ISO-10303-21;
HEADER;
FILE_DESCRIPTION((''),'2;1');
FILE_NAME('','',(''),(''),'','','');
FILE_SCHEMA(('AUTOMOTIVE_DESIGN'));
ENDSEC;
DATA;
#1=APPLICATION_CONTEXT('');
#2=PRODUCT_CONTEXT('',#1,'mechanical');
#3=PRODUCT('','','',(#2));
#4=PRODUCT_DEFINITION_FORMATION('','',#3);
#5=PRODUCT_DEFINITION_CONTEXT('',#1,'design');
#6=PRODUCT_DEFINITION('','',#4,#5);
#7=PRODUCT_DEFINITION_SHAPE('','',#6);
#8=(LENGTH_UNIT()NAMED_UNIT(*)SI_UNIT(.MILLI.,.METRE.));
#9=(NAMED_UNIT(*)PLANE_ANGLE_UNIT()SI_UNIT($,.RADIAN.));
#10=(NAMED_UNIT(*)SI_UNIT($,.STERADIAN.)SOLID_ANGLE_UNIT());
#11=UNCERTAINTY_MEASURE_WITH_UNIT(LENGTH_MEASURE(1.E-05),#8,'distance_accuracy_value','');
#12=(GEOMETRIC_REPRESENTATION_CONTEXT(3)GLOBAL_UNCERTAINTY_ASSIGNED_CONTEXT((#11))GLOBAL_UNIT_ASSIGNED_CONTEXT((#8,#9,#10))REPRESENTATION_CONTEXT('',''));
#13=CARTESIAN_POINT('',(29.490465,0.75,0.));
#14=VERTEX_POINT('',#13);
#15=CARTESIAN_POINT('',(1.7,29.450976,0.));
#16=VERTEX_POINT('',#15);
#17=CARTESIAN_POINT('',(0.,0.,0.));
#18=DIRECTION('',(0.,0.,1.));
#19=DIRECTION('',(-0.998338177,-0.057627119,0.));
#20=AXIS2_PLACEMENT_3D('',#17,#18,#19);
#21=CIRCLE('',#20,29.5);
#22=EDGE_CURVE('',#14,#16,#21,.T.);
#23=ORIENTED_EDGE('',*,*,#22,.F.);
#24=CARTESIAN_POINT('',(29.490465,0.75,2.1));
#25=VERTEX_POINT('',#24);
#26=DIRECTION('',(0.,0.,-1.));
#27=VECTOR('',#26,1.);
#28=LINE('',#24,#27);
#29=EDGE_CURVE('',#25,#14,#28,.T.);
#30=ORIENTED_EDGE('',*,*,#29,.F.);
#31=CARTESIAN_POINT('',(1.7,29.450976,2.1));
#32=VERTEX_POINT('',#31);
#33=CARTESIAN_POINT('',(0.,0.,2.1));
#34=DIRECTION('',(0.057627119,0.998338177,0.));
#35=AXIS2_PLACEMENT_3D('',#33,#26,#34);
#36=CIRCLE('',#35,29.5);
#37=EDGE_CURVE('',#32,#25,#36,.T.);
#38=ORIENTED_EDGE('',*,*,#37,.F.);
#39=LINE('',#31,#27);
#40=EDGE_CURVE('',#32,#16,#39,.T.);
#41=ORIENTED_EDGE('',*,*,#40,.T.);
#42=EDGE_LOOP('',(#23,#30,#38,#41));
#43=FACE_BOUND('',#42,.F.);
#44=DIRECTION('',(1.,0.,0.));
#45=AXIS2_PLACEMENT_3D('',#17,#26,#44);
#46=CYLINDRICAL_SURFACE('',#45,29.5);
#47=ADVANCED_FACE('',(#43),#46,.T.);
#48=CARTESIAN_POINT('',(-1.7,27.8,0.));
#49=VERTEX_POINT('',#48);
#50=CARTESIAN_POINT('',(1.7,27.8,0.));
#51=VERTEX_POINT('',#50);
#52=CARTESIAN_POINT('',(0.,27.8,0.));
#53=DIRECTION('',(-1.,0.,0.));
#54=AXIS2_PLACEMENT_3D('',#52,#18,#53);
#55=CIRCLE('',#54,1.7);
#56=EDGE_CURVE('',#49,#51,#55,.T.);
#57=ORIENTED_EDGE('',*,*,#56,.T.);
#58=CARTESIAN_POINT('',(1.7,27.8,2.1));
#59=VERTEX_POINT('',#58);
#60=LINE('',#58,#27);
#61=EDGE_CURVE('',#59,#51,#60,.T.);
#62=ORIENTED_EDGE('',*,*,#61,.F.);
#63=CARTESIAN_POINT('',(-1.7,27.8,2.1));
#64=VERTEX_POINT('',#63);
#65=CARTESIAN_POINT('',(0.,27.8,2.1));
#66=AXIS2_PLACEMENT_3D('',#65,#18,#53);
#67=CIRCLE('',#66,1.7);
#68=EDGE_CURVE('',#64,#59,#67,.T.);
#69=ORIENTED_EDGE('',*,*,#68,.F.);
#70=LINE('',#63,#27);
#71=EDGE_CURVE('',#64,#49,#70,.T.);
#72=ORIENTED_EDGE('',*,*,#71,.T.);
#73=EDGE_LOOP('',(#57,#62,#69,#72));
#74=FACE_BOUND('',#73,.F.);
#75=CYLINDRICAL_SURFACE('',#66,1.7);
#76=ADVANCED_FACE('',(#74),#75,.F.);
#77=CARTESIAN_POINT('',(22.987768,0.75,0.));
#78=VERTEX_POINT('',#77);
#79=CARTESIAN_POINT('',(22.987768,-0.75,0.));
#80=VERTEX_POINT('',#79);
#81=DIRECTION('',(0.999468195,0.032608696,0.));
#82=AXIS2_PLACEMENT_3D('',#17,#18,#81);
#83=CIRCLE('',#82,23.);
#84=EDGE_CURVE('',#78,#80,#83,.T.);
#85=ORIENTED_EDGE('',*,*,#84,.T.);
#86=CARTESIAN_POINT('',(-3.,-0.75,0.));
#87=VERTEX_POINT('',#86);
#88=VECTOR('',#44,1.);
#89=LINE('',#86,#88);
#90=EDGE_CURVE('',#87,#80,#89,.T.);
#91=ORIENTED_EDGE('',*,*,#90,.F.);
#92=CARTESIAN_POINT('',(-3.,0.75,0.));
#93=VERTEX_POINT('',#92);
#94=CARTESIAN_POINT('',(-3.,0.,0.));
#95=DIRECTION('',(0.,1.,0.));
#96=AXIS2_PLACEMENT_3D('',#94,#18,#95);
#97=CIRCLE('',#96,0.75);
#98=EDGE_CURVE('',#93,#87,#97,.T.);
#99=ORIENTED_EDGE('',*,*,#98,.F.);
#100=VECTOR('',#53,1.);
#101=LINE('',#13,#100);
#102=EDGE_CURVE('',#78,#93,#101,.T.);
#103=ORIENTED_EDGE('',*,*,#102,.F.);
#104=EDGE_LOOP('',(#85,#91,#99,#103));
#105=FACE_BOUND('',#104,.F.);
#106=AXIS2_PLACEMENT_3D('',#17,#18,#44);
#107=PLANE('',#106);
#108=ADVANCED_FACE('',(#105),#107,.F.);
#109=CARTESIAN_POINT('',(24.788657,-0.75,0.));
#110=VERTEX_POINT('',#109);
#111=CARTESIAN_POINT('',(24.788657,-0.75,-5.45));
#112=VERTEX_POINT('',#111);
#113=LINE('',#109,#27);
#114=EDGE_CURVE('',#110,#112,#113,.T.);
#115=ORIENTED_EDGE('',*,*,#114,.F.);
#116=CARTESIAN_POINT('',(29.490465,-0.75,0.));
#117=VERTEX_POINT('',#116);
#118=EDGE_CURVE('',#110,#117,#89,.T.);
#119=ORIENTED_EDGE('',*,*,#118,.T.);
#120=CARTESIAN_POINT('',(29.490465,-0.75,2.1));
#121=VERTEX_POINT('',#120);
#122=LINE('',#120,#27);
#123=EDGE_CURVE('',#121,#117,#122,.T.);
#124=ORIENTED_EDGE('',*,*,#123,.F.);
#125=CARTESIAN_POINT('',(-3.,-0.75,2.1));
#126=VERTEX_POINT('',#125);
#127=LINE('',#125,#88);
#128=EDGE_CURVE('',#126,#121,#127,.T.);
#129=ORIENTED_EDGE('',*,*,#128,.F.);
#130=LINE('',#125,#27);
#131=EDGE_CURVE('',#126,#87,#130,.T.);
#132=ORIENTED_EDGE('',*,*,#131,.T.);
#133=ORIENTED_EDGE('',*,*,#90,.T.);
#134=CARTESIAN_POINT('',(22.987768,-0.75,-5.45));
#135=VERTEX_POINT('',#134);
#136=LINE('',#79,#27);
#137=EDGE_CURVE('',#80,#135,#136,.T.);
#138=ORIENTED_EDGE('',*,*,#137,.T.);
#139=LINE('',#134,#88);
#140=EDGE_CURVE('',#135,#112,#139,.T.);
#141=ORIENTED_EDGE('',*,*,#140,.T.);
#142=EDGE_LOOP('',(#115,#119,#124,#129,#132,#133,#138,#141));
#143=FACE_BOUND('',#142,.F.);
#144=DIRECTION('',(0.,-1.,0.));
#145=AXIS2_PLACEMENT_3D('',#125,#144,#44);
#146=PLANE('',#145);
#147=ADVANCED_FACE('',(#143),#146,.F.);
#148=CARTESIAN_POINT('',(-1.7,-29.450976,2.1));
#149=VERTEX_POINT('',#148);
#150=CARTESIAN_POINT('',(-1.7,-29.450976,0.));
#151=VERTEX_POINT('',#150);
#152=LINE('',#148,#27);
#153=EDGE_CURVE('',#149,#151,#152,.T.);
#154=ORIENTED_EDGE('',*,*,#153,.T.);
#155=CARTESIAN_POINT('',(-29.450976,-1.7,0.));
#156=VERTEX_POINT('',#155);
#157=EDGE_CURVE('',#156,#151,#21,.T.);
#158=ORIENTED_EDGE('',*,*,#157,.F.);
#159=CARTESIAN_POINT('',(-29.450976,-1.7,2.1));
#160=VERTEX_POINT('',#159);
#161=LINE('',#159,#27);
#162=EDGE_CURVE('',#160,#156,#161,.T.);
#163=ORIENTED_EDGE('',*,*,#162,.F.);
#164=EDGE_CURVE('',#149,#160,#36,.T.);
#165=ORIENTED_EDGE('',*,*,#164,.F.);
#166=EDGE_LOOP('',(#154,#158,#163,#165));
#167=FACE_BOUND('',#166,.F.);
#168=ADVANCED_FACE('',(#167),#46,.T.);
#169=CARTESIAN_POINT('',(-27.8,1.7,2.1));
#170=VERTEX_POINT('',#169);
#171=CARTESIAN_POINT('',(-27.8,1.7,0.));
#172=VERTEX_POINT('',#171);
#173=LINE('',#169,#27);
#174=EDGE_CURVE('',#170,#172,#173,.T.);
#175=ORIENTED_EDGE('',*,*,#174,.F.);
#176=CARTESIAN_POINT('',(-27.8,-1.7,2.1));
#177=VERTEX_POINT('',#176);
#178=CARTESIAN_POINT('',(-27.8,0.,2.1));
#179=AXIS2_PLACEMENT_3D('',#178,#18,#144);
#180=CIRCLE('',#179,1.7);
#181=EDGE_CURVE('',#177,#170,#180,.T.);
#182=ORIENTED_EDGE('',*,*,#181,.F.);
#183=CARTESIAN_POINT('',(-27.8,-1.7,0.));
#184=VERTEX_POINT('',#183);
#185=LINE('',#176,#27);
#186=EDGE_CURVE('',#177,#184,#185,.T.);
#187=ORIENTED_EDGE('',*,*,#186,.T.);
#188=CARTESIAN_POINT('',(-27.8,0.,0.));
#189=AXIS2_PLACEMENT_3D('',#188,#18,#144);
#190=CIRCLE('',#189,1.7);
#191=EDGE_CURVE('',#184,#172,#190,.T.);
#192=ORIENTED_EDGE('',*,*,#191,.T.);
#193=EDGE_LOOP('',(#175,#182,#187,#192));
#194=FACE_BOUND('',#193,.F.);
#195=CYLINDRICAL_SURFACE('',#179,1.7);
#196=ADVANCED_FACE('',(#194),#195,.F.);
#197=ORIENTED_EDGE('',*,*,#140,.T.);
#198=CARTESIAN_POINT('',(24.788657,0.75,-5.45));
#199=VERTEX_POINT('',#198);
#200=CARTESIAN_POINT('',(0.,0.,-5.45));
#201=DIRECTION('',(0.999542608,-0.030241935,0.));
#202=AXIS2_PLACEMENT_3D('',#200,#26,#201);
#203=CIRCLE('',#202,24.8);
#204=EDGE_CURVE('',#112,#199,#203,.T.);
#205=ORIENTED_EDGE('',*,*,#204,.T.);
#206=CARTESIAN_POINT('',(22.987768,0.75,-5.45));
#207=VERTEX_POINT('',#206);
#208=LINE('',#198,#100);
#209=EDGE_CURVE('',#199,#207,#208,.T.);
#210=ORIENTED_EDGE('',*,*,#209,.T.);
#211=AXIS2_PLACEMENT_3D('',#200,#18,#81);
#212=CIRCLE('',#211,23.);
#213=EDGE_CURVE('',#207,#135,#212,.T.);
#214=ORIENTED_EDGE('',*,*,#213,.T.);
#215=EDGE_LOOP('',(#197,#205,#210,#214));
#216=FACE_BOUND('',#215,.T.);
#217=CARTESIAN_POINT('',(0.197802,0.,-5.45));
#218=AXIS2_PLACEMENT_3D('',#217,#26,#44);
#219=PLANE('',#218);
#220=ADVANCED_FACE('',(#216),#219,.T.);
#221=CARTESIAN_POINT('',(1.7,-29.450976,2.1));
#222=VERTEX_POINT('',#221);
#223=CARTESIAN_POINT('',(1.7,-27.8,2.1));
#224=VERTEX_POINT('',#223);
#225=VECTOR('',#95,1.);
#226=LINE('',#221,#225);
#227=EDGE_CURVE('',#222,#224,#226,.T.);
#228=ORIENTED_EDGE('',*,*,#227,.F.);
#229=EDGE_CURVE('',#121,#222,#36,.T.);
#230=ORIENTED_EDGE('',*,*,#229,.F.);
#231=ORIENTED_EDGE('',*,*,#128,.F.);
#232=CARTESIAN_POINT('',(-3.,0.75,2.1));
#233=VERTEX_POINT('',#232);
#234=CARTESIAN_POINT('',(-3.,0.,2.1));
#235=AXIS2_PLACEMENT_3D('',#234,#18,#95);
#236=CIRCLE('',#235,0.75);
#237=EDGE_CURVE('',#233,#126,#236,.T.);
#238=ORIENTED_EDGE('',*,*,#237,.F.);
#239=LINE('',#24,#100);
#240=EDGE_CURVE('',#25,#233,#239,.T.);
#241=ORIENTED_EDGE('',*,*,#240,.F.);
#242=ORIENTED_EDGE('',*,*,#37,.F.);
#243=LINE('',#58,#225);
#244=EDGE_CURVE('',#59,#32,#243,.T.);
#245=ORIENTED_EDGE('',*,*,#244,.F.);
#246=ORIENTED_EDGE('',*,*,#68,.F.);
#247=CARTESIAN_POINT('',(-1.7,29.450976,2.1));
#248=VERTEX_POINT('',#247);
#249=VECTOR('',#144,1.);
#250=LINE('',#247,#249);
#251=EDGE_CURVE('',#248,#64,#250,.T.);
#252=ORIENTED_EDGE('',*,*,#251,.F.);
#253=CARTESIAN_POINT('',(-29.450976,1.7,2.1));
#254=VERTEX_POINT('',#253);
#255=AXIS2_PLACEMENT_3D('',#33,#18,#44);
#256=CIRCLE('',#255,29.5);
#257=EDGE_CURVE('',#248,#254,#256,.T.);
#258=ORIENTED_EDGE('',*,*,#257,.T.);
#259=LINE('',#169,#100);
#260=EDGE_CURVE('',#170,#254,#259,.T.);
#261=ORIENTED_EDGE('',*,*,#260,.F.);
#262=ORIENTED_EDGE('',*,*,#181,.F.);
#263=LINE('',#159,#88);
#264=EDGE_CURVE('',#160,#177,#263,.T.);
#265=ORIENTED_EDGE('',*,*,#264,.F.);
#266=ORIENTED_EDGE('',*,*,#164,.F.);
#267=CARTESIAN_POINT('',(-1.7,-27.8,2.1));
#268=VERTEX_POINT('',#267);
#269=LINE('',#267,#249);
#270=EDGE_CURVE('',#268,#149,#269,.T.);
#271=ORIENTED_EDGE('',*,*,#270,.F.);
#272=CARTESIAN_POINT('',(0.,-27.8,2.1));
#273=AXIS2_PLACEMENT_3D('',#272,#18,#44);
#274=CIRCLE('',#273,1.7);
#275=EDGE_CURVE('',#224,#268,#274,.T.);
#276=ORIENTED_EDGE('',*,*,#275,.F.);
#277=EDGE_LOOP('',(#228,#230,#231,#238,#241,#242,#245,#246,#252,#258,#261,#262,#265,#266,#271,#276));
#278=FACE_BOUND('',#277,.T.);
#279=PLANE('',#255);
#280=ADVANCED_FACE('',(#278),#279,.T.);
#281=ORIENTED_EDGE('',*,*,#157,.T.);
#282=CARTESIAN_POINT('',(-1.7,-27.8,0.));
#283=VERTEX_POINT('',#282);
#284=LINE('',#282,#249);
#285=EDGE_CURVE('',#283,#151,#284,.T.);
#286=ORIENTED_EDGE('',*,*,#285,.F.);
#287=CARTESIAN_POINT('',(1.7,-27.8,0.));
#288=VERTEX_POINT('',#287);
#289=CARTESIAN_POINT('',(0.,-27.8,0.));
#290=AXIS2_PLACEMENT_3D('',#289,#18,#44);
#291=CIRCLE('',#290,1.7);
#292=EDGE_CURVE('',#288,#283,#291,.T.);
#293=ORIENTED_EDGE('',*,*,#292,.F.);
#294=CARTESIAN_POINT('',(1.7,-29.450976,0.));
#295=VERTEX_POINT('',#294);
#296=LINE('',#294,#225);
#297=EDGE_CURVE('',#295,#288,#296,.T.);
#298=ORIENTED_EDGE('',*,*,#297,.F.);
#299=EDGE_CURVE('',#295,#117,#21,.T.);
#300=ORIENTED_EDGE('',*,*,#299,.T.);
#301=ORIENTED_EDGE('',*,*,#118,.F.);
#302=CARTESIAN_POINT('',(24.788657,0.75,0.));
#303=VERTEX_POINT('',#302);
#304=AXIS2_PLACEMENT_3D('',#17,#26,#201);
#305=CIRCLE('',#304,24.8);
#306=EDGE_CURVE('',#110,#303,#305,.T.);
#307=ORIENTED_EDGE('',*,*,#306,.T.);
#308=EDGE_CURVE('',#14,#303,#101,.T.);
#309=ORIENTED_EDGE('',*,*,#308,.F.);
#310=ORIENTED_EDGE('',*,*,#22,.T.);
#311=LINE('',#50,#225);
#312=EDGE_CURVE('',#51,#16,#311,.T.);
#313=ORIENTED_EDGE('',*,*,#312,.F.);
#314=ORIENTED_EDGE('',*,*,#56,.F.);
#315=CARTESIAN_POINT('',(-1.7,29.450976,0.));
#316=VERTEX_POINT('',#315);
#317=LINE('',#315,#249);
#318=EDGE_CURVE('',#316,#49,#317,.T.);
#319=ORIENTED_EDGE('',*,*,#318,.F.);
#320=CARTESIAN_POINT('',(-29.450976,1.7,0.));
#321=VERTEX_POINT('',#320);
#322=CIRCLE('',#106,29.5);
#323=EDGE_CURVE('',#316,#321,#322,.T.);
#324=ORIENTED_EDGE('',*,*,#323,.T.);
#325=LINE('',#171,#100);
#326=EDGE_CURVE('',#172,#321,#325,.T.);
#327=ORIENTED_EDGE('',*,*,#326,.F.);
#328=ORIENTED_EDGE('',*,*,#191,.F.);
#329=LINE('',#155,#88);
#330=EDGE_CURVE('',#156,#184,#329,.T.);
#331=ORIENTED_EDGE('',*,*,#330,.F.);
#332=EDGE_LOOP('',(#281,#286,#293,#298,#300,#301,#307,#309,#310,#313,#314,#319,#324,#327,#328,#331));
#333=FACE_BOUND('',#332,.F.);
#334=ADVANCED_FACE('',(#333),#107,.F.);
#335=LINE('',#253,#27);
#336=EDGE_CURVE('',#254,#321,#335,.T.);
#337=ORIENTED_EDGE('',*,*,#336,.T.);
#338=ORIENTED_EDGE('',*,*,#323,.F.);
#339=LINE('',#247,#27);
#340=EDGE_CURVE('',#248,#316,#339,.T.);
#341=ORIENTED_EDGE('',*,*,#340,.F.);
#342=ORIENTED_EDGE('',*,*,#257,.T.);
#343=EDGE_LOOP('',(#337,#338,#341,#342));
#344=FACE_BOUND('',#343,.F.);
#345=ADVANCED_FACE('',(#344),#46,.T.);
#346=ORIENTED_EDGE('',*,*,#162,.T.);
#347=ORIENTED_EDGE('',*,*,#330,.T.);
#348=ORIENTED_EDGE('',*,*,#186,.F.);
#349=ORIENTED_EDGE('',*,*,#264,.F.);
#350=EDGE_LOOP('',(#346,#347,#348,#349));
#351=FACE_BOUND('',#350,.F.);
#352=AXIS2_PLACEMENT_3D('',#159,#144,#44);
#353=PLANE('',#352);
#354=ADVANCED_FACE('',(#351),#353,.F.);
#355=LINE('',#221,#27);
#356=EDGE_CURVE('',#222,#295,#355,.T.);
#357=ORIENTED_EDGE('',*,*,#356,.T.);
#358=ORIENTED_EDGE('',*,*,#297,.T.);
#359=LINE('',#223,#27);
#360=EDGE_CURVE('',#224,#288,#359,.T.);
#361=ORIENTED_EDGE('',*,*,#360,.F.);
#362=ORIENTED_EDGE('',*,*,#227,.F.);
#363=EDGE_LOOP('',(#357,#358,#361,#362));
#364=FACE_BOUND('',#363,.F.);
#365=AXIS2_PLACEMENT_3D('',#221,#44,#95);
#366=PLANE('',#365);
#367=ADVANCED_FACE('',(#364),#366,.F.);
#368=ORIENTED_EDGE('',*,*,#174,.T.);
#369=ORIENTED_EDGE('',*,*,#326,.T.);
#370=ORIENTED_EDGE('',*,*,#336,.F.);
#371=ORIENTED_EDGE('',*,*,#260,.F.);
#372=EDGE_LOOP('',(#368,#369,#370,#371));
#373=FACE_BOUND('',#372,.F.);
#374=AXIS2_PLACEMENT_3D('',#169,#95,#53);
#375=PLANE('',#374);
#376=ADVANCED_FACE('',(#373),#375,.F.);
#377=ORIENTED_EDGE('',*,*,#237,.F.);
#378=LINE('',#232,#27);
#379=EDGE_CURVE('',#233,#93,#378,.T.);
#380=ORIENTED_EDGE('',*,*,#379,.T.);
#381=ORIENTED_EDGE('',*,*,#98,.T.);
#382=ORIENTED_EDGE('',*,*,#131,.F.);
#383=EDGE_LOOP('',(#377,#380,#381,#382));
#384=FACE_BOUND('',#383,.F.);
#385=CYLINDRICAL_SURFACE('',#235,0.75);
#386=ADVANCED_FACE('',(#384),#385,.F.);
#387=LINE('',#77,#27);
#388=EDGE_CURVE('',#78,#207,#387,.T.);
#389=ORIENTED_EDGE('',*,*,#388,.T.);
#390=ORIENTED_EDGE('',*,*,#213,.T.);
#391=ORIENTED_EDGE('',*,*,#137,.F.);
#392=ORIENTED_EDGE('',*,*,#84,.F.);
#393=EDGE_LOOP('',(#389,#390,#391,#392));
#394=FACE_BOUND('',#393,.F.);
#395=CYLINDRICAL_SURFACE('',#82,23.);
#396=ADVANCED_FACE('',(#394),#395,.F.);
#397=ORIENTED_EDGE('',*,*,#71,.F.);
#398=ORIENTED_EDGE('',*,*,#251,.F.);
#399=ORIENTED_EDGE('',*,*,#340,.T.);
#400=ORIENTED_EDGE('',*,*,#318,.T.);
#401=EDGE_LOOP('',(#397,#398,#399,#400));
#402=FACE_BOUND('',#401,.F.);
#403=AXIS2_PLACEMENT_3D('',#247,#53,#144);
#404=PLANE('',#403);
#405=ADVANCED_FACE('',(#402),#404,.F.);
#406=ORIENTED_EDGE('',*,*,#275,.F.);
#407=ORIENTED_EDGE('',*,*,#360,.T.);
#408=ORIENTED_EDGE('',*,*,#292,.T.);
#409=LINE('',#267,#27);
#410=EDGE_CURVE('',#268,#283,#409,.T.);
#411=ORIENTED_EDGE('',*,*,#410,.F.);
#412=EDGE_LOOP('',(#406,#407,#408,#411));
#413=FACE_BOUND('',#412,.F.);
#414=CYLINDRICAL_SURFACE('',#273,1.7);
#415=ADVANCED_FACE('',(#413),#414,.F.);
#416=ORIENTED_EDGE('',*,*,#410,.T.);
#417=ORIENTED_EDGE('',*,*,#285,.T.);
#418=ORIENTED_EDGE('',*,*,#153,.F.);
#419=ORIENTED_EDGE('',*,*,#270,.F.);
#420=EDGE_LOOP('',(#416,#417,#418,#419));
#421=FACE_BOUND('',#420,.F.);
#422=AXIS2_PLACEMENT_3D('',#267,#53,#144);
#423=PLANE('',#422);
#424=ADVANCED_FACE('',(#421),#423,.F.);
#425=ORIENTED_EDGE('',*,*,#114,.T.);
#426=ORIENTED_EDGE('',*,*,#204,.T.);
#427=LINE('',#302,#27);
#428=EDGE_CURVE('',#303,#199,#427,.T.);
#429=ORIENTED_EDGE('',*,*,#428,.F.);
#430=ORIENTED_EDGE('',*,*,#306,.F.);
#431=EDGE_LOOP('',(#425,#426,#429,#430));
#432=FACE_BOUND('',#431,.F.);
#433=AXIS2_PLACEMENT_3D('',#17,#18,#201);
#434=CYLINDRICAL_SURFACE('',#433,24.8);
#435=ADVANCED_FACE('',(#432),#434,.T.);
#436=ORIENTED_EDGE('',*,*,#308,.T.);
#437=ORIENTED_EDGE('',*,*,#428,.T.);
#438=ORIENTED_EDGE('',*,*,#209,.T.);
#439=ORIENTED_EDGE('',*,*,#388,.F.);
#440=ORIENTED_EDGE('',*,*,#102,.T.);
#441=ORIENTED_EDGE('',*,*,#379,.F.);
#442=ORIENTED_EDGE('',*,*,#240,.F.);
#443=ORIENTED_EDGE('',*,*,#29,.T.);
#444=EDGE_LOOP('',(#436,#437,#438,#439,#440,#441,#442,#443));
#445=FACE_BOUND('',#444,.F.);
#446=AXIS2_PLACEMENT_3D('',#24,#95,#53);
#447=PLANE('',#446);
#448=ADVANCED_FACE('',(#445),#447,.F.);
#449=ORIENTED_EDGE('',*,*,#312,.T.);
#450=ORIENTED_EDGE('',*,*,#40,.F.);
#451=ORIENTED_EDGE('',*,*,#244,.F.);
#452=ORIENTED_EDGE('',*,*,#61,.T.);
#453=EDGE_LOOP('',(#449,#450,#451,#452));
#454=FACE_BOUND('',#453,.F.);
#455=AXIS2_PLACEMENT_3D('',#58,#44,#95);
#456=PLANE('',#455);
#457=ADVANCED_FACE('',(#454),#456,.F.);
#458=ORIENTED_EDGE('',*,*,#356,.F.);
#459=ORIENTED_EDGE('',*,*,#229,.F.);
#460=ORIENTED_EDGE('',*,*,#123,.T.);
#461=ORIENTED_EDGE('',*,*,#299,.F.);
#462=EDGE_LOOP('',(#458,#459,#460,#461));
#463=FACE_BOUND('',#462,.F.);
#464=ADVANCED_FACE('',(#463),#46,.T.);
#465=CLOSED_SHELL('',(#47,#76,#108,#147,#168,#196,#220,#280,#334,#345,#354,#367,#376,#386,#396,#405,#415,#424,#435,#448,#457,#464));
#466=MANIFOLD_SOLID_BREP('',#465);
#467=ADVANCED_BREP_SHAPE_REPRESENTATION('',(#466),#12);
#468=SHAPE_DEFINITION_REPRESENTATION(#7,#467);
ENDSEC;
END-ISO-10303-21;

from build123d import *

# Parameters (mm, degrees)
F0_R            = 29.5
F2_DEPTH        = 2.1
F4_DEPTH        = 2.1
F4_COPIES_COUNT = 3
F4_COPIES_ANGLE = 180
F6_DEPTH        = 2.1
F8_DEPTH        = 5.45


# Not quite as in the source:
# - a pattern or mirror of a feature is missing from the dataset's text; its kind, count and spacing are read off the source's solid


with BuildPart() as f2:
    # F0 (on Top) → F2 (new body)
    with BuildSketch(Plane.XY):
        Circle(F0_R)
    extrude(amount=F2_DEPTH)

    # F3 (on face) → F4 (cut, through all)
    with BuildSketch(Plane.XY.offset(2.1)):
        with BuildLine():
            ThreePointArc((-1.7, 27.8), (0, 26.1), (1.7, 27.8))
            Line((1.7, 27.8), (1.7, 29.4509762147))
            ThreePointArc((1.7, 29.4509762147), (0, 29.5), (-1.7, 29.4509762147))
            Line((-1.7, 29.4509762147), (-1.7, 27.8))
        make_face()
    f4 = extrude(amount=-F4_DEPTH, mode=Mode.SUBTRACT)

    # F4_copies: F4 ×3 about axis
    f4_copies_axis = Axis((0, 0, 0), (0, 0, 1))
    for i in range(1, F4_COPIES_COUNT):
        add(f4.rotate(f4_copies_axis, i * F4_COPIES_ANGLE / (F4_COPIES_COUNT - 1)), mode=Mode.SUBTRACT)

    # F5 (on face) → F6 (cut, through all)
    with BuildSketch(Plane.XY.offset(2.1)):
        with BuildLine():
            ThreePointArc((-3, 0.75), (-3.75, 0), (-3, -0.75))
            Line((-3, -0.75), (29.4904645606, -0.75))
            ThreePointArc((29.4904645606, -0.75), (29.5, 0), (29.4904645606, 0.75))
            Line((29.4904645606, 0.75), (-3, 0.75))
        make_face()
    extrude(amount=-F6_DEPTH, mode=Mode.SUBTRACT)

    # F7 (on face) → F8 (join)
    with BuildSketch(Plane(origin=(0, 0, 0), x_dir=(1, 0, 0), z_dir=(0, 0, -1))):
        with BuildLine():
            Line((22.9877684867, 0.75), (24.78865668, 0.75))
            ThreePointArc((24.78865668, 0.75), (-24.8, 0), (24.78865668, -0.75))
            Line((24.78865668, -0.75), (22.9877684867, -0.75))
            ThreePointArc((22.9877684867, -0.75), (-23, 0), (22.9877684867, 0.75))
        make_face()
    extrude(amount=F8_DEPTH)


solid = f2.part
